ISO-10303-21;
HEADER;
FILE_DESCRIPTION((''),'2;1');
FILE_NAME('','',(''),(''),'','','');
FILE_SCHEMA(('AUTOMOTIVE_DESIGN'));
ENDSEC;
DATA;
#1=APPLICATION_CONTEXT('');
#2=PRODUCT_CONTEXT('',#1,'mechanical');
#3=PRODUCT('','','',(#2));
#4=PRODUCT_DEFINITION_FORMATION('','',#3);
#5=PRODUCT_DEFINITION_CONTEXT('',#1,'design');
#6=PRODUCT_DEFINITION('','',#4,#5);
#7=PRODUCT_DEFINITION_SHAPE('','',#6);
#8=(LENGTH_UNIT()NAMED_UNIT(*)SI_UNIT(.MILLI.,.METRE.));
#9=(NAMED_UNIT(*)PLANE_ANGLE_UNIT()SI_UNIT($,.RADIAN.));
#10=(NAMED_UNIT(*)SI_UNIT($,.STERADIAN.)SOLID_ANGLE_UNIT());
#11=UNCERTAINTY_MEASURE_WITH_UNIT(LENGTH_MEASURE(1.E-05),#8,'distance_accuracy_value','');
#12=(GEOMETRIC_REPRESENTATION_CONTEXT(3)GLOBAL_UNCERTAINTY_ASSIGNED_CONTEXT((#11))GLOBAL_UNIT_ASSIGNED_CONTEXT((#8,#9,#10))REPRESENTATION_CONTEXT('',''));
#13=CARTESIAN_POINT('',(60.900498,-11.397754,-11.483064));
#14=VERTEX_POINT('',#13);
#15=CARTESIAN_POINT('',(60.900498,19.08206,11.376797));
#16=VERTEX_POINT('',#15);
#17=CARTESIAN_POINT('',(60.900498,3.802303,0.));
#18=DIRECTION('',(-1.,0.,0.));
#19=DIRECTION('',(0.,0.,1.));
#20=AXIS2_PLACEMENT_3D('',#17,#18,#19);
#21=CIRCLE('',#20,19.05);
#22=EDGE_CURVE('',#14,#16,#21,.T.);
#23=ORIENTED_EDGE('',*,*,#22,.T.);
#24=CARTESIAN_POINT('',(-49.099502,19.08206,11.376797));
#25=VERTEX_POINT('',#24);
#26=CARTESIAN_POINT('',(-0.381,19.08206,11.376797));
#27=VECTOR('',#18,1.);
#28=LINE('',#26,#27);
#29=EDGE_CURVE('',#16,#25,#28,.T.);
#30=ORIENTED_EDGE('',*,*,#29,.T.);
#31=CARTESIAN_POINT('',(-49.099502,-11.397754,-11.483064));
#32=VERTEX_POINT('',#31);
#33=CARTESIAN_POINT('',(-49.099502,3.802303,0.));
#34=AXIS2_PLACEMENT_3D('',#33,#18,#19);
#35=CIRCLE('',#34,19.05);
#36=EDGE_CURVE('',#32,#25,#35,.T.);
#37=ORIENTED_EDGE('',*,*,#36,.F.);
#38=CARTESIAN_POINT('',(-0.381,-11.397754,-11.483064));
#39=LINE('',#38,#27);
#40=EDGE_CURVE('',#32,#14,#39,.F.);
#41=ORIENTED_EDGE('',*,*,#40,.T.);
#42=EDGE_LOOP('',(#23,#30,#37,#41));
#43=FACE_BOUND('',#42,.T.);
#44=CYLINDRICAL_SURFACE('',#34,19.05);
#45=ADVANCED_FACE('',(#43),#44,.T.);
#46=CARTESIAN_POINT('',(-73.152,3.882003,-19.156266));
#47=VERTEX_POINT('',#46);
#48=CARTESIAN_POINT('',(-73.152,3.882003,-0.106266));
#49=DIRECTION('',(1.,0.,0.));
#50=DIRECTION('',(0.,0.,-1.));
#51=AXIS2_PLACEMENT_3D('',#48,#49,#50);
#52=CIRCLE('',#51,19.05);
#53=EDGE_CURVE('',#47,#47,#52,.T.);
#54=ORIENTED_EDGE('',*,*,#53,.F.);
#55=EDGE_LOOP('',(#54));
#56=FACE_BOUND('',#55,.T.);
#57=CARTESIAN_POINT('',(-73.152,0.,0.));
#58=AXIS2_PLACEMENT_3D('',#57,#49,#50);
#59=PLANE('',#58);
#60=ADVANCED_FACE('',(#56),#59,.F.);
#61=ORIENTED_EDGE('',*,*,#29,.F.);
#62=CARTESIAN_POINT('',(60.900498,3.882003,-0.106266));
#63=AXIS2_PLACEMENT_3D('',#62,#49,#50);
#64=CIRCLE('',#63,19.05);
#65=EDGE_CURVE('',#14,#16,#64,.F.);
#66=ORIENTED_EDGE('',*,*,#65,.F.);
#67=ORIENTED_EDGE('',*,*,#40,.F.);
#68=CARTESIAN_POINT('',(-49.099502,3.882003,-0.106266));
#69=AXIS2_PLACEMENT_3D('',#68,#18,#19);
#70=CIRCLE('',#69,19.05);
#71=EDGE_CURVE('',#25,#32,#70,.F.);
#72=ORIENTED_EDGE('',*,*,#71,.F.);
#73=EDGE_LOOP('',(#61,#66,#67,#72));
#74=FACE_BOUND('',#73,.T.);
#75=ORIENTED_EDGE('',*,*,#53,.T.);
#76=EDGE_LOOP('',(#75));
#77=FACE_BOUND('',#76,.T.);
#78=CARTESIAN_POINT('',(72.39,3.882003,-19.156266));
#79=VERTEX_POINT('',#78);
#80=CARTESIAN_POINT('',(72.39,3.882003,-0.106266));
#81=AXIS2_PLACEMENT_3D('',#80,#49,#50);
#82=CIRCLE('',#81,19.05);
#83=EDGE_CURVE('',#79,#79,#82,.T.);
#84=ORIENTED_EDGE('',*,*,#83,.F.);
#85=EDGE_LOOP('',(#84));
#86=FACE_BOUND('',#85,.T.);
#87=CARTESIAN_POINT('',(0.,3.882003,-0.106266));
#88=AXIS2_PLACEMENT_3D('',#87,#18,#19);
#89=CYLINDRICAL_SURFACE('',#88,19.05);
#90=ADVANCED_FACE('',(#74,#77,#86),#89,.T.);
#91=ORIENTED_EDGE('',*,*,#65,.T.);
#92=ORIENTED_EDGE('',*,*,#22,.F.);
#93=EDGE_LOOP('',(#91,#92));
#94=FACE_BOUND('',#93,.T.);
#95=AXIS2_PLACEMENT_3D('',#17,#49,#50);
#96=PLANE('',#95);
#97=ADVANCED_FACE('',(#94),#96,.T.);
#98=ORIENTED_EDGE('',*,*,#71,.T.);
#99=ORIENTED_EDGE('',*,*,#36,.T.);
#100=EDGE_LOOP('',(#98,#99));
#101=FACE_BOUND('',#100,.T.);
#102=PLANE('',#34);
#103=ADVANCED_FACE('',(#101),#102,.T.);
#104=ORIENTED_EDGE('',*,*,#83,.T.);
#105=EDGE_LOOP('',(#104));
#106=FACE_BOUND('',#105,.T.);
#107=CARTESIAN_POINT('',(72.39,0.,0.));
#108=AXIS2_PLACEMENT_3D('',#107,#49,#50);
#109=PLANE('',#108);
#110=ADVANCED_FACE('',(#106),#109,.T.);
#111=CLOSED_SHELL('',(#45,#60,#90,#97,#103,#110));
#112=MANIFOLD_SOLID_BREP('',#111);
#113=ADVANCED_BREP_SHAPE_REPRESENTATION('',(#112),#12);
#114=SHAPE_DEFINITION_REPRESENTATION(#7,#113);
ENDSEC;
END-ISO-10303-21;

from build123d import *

# Parameters (mm, degrees)
SKETCH1_W                = 110
SKETCH1_H                = 19.05
BOSS_EXTRUDE1_DEPTH      = 72.39
BOSS_EXTRUDE1_DEPTH_BACK = 73.152
F_3DSKETCH1_R            = 19.05


with BuildPart() as part:
    # Sketch1 → Revolve1 (revolve)
    with BuildSketch(Plane.XY):
        with Locations((5.900498231, -5.722696838)):
            Rectangle(SKETCH1_W, SKETCH1_H)
    revolve(axis=Axis((-49.099501769, 3.802303162, 0), (1, 0, 0)))

    # 3DSketch1 → Boss-Extrude1 (add, two sides: drawn at the far end of the back side and taken through both)
    with BuildSketch(Plane(origin=(0, 3.882002719, -0.106266077), x_dir=(0, 0, 1), z_dir=(1, 0, 0)).offset(-BOSS_EXTRUDE1_DEPTH_BACK)):
        Circle(F_3DSKETCH1_R)
    extrude(amount=BOSS_EXTRUDE1_DEPTH + BOSS_EXTRUDE1_DEPTH_BACK)


solid = part.part
